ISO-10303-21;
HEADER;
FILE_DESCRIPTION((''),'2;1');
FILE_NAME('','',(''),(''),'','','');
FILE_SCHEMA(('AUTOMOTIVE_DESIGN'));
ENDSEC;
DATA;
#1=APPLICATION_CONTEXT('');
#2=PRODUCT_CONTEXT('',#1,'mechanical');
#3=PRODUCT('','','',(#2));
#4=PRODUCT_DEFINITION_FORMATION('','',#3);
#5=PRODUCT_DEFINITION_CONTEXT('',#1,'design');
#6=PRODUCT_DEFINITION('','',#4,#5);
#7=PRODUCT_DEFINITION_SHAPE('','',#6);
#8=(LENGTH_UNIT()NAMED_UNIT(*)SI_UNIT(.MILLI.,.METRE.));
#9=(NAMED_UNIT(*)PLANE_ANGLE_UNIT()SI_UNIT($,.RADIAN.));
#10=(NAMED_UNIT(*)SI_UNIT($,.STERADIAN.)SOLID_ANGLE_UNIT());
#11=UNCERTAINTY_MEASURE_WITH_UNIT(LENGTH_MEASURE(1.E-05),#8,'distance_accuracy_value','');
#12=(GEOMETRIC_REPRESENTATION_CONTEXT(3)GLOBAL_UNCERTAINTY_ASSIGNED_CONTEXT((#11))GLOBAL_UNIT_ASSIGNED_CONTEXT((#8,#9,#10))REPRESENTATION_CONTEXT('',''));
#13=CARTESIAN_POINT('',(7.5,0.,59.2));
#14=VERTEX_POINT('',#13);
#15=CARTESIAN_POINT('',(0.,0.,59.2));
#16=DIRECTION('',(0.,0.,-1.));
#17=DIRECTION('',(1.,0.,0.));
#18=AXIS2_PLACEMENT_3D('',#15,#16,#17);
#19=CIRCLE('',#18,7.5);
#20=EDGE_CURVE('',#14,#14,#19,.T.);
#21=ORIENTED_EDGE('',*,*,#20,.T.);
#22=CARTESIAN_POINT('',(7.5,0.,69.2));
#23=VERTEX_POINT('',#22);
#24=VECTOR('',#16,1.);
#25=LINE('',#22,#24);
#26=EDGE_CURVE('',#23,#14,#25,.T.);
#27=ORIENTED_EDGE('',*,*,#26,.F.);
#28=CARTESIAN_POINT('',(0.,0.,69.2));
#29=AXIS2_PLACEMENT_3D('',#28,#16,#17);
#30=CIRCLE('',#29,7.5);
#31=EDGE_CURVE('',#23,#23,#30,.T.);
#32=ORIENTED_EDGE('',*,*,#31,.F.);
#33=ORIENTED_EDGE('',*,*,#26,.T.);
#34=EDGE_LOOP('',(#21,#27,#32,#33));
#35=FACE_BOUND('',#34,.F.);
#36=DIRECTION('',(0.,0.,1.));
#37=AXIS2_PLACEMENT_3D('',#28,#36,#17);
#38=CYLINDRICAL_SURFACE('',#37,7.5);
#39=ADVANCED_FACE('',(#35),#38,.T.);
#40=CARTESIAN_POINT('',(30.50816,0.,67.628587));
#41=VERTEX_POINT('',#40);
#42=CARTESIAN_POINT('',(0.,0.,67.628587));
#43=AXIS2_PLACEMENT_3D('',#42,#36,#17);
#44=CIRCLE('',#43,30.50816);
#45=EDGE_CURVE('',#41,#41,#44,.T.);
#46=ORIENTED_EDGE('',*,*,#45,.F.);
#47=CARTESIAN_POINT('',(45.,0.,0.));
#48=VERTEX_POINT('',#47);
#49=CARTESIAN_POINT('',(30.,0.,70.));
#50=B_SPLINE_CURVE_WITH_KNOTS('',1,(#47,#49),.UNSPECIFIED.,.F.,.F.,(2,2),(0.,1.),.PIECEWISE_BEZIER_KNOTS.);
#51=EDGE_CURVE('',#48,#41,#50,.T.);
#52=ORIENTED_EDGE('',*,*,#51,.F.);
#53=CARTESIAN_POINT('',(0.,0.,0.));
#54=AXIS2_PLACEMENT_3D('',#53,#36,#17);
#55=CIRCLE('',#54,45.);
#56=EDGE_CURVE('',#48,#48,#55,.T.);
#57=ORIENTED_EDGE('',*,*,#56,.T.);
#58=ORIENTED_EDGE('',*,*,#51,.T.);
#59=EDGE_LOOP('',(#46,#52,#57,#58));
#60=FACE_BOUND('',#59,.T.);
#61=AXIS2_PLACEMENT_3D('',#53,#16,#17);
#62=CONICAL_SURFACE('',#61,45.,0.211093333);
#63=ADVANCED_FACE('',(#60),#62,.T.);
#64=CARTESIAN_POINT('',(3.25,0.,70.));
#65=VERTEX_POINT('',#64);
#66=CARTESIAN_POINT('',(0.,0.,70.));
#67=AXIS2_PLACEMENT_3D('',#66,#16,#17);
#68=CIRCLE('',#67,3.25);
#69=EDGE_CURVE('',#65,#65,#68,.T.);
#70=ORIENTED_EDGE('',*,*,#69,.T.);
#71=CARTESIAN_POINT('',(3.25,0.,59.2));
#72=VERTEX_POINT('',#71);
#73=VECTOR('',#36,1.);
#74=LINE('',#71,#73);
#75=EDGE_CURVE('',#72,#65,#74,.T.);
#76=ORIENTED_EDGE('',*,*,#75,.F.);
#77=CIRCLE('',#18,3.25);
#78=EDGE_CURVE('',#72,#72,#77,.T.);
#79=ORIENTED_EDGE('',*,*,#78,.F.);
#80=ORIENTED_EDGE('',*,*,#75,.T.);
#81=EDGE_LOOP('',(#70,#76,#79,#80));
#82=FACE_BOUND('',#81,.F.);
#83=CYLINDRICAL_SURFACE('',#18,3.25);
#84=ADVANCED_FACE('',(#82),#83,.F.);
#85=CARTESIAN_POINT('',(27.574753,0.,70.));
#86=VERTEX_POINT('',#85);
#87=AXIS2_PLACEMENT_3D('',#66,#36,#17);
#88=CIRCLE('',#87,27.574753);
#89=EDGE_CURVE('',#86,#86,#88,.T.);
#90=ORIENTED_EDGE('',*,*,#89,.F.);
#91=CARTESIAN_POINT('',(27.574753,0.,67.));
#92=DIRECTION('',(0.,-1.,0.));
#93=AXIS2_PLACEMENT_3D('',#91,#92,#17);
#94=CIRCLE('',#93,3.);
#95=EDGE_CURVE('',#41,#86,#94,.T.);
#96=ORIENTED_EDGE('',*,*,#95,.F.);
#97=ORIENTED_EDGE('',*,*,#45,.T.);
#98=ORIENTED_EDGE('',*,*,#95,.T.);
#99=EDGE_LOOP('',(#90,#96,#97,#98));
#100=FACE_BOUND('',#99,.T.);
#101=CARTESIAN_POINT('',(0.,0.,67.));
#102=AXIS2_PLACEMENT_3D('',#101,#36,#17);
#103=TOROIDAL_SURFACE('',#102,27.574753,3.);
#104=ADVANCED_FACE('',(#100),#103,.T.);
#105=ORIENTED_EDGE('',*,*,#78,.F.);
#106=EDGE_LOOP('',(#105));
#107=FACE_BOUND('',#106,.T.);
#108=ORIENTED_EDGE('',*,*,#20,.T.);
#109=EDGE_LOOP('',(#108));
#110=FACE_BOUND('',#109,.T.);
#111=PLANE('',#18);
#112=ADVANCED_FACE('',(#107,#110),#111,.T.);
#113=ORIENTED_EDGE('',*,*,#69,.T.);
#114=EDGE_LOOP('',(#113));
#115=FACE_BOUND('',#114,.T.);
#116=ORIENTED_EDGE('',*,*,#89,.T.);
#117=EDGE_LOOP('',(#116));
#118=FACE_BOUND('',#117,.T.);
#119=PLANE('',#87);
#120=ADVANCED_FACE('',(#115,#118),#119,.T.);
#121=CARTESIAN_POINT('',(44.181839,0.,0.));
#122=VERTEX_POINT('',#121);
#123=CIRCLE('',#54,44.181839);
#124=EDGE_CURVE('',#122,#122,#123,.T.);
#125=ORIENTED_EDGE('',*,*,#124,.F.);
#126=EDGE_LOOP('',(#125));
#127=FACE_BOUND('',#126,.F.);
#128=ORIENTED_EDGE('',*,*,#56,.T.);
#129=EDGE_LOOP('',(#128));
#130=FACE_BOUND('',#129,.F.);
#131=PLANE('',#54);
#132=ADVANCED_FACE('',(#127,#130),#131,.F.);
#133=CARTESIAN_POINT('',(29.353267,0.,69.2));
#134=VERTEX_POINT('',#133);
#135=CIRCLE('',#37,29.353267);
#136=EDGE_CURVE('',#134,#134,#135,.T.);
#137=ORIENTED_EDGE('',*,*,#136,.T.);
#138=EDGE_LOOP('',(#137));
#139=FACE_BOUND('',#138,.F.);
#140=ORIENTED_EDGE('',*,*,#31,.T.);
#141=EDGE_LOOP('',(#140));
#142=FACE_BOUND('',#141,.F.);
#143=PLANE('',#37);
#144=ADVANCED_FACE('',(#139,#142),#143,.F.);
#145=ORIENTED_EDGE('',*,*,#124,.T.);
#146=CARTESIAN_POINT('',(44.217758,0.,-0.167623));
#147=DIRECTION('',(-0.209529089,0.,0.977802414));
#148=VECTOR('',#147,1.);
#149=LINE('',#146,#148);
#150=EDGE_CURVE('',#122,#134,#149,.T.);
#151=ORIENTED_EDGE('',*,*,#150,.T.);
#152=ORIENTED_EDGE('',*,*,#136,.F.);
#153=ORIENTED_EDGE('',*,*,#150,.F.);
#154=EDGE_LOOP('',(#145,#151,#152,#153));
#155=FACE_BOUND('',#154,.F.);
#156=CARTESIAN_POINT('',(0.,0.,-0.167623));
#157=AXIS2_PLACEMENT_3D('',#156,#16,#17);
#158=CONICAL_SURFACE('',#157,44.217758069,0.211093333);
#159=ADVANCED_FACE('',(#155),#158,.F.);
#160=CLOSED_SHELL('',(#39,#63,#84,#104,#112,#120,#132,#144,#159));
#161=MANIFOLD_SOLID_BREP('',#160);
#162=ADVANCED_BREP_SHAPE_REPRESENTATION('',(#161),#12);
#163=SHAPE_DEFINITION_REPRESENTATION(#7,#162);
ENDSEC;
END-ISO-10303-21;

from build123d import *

# Parameters (mm, degrees)
F1_R     = 45
F2_R     = 30
F4_T     = -0.8
F5_R     = 7.5
F6_DEPTH = 10
F7_R     = 3.25
F8_DEPTH = 10.8010001
F9_R     = 3


with BuildPart() as f3:
    # F1 (on Top) → F3 section 0
    with BuildSketch(Plane.XY):
        Circle(F1_R)
    # F2 (on offset) → F3 section 1
    with BuildSketch(Plane.XY.offset(70)):
        Circle(F2_R)
    loft()

    # F4
    f4_openings = [f3.faces().sort_by_distance(p)[0] for p in [
        (0, 0, 0),
    ]]
    offset(amount=F4_T, openings=f4_openings, kind=Kind.INTERSECTION)

    # F5 (on face) → F6 (join)
    with BuildSketch(Plane(origin=(0, 0, 69.2), x_dir=(1, 0, 0), z_dir=(0, 0, -1))):
        Circle(F5_R)
    extrude(amount=F6_DEPTH)

    # F7 (on face) → F8 (cut, through all)
    with BuildSketch(Plane(origin=(0, 0, 59.2), x_dir=(1, 0, 0), z_dir=(0, 0, -1))):
        Circle(F7_R)
    extrude(amount=-F8_DEPTH, mode=Mode.SUBTRACT)

    # F9
    f9_edges = [f3.edges().sort_by_distance(p)[0] for p in [
        (-30, 0, 70),
    ]]
    fillet(f9_edges, radius=F9_R)


solid = f3.part
